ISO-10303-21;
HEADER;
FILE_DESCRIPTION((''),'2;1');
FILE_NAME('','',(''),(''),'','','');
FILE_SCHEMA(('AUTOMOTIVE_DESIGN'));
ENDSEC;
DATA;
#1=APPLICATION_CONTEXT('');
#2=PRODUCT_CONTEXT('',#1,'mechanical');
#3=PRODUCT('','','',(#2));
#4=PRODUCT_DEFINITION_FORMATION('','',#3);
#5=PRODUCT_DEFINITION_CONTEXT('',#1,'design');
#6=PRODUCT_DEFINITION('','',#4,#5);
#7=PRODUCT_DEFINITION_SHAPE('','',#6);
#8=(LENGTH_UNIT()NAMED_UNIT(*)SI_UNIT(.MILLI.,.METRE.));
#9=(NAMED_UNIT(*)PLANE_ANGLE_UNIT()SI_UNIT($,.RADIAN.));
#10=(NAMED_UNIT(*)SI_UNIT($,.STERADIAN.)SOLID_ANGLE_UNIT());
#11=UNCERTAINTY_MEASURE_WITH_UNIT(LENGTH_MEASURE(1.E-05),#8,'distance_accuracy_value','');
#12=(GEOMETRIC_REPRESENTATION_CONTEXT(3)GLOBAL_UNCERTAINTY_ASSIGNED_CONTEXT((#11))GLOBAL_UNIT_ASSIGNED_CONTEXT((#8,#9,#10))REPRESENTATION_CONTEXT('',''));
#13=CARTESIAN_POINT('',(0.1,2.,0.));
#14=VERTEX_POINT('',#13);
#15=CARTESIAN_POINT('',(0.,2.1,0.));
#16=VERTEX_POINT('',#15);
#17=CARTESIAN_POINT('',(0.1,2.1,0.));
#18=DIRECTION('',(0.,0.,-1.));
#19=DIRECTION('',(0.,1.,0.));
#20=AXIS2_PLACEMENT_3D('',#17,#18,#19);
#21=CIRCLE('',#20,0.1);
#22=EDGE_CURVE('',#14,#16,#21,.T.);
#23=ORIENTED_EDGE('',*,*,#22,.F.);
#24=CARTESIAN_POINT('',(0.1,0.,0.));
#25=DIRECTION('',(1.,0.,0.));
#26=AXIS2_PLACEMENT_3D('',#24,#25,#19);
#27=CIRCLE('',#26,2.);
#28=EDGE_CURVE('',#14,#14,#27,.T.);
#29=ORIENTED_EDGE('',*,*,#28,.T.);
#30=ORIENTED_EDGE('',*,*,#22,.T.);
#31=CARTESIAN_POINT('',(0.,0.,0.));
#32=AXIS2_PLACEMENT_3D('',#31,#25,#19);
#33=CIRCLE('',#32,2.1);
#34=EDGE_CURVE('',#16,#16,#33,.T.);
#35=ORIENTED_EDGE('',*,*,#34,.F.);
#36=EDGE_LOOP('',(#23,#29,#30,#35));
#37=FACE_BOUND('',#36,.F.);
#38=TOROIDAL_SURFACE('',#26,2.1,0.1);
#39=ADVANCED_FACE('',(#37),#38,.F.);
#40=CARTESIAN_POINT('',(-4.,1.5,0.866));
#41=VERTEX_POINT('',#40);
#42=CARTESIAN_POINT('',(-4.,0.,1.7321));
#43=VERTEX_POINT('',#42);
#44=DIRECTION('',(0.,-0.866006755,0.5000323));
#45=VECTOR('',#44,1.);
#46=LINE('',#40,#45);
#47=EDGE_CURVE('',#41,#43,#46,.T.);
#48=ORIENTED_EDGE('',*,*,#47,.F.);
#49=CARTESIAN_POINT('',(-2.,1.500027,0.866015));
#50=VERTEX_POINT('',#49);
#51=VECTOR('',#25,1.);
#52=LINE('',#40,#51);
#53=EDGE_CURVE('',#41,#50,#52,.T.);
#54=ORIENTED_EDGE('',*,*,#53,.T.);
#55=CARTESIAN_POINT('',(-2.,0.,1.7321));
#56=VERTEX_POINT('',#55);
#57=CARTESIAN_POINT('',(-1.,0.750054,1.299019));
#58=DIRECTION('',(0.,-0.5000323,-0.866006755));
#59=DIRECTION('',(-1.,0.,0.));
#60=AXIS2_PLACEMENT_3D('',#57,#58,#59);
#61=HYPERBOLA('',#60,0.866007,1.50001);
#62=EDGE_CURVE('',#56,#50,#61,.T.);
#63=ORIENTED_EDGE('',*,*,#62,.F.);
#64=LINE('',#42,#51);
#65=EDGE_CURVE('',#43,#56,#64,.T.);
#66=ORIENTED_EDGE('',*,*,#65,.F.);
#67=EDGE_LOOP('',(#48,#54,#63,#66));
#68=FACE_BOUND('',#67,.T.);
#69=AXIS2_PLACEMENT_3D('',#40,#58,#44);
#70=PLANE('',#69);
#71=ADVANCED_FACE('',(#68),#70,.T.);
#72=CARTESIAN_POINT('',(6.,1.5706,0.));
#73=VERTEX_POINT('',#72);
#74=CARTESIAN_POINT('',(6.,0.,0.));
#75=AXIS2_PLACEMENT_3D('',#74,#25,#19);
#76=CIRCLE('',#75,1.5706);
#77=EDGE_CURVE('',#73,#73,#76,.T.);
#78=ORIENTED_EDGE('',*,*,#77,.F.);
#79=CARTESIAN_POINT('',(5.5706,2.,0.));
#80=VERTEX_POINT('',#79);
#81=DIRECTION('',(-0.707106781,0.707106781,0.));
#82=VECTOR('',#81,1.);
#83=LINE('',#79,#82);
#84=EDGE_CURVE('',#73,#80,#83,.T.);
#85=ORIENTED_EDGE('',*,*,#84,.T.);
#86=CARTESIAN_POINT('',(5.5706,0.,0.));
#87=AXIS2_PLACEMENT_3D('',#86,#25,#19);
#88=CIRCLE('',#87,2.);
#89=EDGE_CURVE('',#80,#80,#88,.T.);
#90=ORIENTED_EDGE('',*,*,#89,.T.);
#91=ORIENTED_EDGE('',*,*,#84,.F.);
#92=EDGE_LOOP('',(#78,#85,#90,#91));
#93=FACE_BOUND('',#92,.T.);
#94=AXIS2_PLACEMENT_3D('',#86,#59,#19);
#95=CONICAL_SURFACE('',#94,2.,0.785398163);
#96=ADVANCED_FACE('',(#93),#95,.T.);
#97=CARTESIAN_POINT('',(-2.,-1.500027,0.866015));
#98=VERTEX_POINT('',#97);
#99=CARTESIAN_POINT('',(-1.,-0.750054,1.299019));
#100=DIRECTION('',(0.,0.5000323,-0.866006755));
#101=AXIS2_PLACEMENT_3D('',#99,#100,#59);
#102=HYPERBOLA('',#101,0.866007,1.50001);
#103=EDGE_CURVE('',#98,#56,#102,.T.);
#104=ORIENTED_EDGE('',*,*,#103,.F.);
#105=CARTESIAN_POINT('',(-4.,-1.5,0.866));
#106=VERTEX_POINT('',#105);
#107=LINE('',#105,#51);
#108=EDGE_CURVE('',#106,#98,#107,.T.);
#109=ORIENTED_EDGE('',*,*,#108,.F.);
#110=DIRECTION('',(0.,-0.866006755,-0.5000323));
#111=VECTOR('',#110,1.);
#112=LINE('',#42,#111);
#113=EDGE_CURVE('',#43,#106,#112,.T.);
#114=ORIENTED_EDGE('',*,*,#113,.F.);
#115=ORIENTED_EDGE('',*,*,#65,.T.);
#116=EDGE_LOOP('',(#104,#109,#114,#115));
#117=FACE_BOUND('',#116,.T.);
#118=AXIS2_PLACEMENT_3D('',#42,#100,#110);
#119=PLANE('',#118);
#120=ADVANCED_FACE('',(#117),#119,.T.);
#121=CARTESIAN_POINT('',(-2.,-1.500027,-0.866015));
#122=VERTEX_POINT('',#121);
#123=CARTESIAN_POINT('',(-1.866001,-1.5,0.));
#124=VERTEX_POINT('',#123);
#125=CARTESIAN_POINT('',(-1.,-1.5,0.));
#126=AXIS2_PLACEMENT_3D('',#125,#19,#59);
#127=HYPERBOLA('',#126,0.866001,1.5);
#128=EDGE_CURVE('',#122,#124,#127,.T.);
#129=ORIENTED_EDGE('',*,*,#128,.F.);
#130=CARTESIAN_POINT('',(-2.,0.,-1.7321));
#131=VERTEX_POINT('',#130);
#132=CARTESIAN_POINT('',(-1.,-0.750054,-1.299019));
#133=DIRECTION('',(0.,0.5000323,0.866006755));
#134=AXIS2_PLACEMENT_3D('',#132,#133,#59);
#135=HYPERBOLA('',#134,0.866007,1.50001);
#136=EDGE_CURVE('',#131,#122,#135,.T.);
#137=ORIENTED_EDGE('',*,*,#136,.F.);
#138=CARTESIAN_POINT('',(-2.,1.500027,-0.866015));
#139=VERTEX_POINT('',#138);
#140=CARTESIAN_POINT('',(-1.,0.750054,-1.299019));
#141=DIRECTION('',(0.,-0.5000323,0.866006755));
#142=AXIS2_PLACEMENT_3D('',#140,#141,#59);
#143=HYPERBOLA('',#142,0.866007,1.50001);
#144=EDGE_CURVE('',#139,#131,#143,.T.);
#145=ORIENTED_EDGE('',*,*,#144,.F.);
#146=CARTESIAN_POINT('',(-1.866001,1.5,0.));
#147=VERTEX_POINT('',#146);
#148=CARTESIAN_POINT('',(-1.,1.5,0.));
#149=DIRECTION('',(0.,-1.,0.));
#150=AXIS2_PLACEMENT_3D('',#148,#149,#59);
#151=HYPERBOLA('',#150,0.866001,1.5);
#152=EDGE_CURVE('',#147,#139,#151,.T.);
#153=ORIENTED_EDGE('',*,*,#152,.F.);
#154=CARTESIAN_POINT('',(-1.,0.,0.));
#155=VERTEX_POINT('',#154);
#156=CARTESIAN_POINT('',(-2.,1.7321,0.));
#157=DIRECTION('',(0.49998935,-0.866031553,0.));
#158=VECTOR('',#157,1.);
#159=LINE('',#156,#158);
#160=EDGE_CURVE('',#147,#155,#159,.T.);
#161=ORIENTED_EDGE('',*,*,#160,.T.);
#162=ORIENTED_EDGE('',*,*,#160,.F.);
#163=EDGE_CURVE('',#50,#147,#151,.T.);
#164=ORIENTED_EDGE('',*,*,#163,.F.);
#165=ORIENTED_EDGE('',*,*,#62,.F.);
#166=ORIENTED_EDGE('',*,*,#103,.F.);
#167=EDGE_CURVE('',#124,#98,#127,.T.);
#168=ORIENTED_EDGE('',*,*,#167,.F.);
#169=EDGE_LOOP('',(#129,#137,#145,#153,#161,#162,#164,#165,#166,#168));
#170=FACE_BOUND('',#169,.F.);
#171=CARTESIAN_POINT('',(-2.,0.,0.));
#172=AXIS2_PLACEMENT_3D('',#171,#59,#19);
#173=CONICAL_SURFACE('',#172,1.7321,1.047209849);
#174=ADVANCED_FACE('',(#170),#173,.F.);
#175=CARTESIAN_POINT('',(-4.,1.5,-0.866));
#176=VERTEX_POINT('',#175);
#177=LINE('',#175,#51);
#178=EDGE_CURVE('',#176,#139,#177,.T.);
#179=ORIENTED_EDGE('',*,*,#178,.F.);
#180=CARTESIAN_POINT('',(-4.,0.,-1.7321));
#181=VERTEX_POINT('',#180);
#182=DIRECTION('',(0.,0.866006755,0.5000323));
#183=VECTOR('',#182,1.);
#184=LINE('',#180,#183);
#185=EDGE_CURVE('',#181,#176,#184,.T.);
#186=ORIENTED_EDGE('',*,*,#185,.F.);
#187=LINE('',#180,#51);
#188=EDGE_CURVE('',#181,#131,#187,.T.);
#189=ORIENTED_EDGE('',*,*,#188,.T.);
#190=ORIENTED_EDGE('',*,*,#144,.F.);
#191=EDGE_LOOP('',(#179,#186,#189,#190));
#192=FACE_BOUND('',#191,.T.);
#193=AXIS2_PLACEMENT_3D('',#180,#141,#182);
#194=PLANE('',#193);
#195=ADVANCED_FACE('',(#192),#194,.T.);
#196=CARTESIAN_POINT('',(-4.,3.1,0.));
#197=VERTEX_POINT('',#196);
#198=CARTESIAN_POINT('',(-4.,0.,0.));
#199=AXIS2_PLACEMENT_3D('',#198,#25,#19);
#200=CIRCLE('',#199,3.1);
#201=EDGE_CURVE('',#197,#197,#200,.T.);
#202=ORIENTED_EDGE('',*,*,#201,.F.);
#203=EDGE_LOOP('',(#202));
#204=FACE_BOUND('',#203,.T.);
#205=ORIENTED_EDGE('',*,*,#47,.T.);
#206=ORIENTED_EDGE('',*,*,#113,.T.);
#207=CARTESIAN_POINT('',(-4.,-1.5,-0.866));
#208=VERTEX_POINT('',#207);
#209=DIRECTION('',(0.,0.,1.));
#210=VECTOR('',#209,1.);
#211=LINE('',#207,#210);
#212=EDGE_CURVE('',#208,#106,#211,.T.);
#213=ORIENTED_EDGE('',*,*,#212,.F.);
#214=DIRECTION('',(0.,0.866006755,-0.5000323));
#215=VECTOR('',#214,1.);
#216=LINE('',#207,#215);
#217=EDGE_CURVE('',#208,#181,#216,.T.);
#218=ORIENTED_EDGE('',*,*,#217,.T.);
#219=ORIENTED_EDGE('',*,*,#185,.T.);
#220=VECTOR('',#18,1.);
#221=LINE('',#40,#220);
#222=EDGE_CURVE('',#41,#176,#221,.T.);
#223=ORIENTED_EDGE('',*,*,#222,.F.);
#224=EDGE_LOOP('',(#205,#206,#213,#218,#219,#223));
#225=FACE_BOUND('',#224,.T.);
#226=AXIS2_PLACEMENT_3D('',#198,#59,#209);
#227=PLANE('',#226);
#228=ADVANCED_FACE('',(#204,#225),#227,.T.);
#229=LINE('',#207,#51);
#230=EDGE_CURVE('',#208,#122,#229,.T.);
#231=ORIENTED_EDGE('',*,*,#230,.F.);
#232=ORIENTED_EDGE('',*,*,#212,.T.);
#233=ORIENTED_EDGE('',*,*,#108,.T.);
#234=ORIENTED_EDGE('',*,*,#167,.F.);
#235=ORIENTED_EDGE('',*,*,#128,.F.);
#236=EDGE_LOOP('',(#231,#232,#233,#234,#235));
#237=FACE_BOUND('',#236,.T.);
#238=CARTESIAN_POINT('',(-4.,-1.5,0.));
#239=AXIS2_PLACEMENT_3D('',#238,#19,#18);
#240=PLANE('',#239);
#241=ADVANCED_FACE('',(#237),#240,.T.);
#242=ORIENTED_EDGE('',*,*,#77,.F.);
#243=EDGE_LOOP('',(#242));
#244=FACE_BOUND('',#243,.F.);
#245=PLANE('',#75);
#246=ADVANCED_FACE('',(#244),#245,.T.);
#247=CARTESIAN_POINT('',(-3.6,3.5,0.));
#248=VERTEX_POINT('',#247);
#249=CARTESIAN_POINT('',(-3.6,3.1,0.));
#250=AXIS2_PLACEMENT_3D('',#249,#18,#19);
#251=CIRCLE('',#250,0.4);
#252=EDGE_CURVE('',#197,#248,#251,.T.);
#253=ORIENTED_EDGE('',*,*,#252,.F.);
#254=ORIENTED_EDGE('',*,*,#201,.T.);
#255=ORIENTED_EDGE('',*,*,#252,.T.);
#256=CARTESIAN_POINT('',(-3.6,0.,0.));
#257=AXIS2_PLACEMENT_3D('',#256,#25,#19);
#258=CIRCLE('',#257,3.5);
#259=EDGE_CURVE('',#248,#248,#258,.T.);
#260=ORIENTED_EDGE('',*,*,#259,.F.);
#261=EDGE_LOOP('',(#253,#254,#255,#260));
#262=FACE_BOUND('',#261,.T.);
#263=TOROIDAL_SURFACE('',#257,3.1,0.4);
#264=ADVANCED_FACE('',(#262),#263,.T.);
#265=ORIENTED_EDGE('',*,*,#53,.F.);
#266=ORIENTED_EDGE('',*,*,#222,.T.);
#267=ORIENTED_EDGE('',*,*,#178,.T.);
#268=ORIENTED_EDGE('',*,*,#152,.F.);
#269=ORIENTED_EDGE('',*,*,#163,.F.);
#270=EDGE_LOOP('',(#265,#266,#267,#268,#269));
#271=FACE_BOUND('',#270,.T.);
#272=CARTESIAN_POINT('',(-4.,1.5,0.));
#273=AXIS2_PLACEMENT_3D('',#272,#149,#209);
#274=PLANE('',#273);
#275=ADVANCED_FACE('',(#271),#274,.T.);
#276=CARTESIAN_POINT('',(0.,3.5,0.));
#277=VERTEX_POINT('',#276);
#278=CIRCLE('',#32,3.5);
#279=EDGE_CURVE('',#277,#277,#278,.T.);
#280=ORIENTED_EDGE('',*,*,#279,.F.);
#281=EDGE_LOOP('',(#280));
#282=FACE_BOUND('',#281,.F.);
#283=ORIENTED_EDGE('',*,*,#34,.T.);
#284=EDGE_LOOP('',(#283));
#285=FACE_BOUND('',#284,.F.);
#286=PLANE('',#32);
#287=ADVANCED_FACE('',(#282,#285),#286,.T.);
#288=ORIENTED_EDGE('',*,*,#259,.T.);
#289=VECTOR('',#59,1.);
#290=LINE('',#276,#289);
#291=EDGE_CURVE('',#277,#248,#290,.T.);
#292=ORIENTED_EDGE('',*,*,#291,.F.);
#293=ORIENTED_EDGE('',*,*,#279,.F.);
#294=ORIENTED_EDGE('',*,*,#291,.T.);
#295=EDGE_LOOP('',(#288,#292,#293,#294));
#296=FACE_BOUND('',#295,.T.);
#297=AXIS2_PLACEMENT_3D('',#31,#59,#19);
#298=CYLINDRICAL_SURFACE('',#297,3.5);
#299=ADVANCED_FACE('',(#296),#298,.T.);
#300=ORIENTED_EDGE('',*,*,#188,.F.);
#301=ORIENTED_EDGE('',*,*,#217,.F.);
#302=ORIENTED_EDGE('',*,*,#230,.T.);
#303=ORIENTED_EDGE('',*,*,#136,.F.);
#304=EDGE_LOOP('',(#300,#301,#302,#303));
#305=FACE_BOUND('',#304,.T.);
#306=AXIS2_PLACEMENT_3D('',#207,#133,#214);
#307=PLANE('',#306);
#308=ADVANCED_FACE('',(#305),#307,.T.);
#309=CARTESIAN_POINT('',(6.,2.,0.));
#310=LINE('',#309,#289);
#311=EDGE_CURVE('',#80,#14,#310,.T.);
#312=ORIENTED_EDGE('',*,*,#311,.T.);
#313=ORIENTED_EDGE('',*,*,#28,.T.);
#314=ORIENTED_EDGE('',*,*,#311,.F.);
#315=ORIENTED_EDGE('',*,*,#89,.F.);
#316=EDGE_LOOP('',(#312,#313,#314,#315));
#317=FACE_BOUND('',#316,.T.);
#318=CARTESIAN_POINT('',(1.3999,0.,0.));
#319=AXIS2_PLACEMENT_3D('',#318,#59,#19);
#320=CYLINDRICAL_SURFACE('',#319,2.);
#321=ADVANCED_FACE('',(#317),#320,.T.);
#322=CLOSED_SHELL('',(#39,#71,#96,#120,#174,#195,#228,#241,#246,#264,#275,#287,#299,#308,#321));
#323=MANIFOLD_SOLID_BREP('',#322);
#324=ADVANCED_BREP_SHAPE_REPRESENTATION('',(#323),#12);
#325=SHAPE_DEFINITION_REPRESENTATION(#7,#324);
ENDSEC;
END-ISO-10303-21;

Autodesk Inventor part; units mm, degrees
ref_plane "YZ Plane" through (0, 0, 0) normal (1, 0, 0) x (0, 1, 0)
ref_plane "XZ Plane" through (0, 0, 0) normal (0, 1, 0) x (-1, 0, 0)
sketch "Sketch1" plane through (0, 0, 0) normal (0, 0, 1) x (1, 0, 0)
  line L0 (-1, 0) -> (6, 0)
  line L1 (6, 0) -> (6, 2)
  line L2 (6, 2) -> (1.8294, 2)
  line L3 (1.8294, 2) -> (1.3999, 2)
  line L4 (1.3999, 2) -> (0, 2)
  line L5 (0, 2) -> (0, 3.5)
  line L6 (0, 3.5) -> (-4, 3.5)
  line L7 (-4, 3.5) -> (-4, 1.7321)
  line L8 (-4, 1.7321) -> (-2, 1.7321)
  line L9 (-2, 1.7321) -> (-1, 0)
  line L10 (-6, 0) -> (8, 0) projected
  line L11 (0, -0.7) -> (0, 4.2) projected
  line L12 (1.8294, 2) -> (0, 2) construction
  dimension "d1" = 4.1706
  dimension "d2" = 0.4295
  dimension "d3" = 4
  dimension "d4" = 2
  dimension "d5" = 60
  dimension "d6" = 4
  dimension "d7" = 4
  dimension "d8" = 3.4641
  dimension "d9" = 7
  dimension "d26" = 6
revolve "Body" add sketch "Sketch1" angle 360 about axis through (-1, 0, 0) along (1, 0, 0)
sketch "Sketch2" plane through (-4, 0, 0) normal (-1, 0, 0) x (0, 0, 1)
  circle A0 centre (0, 0) radius 1.7321 projected
  line L0 (0, -4.9) -> (0, 4.9) projected
  line L1 (-4.9, 0) -> (4.9, 0) projected
  line L2 (1.7321, 0) -> (0.866, -1.5)
  line L3 (0.866, -1.5) -> (-0.866, -1.5)
  line L4 (-0.866, -1.5) -> (-1.7321, 0)
  line L5 (-1.7321, 0) -> (-0.866, 1.5)
  line L6 (-0.866, 1.5) -> (0.866, 1.5)
  line L7 (0.866, 1.5) -> (1.7321, 0)
extrude "Slot" add sketch "Sketch2" against normal up to next contours L7 A0 | A0 L2 | L6 L0 A0 | A0 L0 L3 | L0 L6 A0 | A0 L3 L0 | L4 A0 | A0 L5
fillet "Fillet1" radius 0.4 1 edges at (-4, -3.5, 0)
thread "Thread" size "M4x0.7" class "6g" standard "ISO Metric profile" length 4.1706
chamfer "Chamfer1" distance 0.4294 distance2 0.4294 1 edges at (6, -2, 0) measured on face at (6, 0.556, 0.0273)
ref_plane "Work Plane1" through (29, 0, 0) normal (0, -1, 0) x (1, 0, 0)
fillet "Fillet2" radius 0.1 1 edges at (0, -2, 0)
equation "\"d30\" = R"
equation "\"d17\" = RR"
equation "\"d13\" = GEL"
equation "\"d15\" = -0.5 * SPD + 0.5 * GD"
equation "\"d16\" = GUL"
equation "\"d1\" = GEL"
equation "\"d3\" = KOH"
equation "\"d4\" = INTI"
equation "\"d6\" = GD"
equation "\"d7\" = BDM"
equation "\"d8\" = 1.1547 * SW"
equation "\"d9\" = KOD"
equation "\"d26\" = NLG"
equation "\"GD\" = NND"
equation "\"NLG\" = 6"
equation "\"GEL\" = 4.17058"
equation "\"KOD\" = 7"
equation "\"KOH\" = 4"
equation "\"INTI\" = 2"
equation "\"GAL\" = 0.61345 * PTC"
equation "\"GUL\" = 0.61345 * PTC"
equation "\"BDM\" = NND"
equation "\"SW\" = 3"
equation "\"RR\" = 0.4"
equation "\"SPD\" = 3.14117"
equation "\"R\" = 0.1"
equation "\"TOA\" = 30deg"
equation "\"THREADDIA\" = 4"
equation "\"PTC\" = 0.7"
equation "\"NND\" = 4"
equation "\"E0\" = 1.155 * SW"
equation "\"GD1\" = THREADDIA - 1.2269 * PTC"
properties part number "ANSI B18.3.1M - M4x0.7 x 6, FSHCSM" material "Steel, Mild"
